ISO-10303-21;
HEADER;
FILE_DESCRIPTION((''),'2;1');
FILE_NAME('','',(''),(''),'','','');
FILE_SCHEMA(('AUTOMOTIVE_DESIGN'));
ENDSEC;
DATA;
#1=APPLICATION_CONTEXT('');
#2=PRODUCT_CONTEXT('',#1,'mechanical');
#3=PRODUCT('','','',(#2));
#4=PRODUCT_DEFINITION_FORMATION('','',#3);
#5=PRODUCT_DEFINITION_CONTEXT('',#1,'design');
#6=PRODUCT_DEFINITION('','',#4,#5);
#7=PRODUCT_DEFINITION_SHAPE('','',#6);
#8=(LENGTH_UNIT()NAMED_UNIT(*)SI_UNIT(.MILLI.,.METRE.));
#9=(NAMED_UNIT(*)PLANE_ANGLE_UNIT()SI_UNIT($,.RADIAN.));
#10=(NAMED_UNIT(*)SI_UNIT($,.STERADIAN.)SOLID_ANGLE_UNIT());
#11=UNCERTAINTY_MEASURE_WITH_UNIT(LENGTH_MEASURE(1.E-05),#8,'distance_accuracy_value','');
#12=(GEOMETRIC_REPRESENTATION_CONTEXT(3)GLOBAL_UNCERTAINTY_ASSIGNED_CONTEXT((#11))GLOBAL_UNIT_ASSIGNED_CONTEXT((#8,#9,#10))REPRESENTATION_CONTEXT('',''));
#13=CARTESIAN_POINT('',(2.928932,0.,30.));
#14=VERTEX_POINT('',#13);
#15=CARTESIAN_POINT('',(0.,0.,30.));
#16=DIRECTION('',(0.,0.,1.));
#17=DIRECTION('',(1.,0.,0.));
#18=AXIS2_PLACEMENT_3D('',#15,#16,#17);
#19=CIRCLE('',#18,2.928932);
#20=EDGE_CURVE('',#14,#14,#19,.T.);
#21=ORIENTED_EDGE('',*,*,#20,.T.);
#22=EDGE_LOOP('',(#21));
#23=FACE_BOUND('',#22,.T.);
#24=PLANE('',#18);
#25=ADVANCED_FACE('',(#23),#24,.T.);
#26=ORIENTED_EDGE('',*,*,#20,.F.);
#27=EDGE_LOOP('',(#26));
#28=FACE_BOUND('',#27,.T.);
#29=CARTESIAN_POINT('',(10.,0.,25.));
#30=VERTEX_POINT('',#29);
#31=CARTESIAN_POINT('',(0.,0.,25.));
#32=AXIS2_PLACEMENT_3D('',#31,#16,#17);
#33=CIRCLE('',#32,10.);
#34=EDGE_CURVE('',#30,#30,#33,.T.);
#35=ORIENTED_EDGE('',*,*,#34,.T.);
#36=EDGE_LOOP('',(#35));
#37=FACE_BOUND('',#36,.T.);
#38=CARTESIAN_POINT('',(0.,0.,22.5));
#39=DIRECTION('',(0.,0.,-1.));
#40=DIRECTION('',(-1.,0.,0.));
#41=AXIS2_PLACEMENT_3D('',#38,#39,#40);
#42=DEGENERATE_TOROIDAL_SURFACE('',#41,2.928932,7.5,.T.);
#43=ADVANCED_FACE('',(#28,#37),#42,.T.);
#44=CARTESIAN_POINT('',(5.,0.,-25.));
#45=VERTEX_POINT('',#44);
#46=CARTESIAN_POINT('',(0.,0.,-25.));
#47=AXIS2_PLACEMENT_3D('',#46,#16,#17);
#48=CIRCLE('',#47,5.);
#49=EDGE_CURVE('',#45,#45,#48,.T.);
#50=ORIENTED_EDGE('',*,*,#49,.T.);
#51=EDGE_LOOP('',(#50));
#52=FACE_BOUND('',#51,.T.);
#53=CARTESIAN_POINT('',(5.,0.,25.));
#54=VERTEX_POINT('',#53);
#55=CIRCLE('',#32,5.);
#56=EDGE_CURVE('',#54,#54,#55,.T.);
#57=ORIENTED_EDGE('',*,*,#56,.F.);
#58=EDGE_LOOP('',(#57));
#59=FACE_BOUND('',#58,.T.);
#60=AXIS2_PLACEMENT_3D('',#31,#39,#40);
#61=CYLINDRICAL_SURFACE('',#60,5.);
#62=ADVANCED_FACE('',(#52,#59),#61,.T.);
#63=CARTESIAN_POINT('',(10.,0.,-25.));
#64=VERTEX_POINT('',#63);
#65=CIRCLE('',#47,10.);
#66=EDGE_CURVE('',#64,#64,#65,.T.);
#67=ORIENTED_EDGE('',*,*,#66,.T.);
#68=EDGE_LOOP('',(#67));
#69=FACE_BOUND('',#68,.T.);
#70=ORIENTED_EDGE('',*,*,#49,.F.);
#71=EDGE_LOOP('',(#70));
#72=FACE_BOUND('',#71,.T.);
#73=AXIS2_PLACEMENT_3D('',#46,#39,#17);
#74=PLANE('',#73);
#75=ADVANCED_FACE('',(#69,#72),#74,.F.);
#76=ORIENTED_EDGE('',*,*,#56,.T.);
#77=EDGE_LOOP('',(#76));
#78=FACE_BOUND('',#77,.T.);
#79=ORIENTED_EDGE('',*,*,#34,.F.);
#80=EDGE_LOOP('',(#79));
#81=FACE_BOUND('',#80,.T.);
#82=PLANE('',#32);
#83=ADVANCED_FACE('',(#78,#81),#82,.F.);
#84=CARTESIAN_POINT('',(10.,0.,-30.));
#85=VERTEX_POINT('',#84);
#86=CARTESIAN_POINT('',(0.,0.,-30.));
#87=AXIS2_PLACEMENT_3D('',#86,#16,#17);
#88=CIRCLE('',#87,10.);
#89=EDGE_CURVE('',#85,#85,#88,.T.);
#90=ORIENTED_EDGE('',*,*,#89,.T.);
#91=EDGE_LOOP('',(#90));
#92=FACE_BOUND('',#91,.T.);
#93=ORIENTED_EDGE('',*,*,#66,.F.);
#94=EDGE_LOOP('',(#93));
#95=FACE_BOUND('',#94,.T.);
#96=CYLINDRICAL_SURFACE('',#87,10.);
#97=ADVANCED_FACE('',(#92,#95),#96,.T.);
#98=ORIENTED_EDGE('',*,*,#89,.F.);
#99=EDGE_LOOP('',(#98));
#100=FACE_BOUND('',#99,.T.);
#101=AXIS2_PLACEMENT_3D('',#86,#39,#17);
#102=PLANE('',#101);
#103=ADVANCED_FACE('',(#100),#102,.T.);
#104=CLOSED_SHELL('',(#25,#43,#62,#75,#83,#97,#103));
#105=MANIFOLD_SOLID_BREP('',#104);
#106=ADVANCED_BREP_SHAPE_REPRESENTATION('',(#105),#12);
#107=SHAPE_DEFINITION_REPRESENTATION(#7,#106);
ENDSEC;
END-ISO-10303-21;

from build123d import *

# Parameters (mm, degrees)
SKETCH1_R           = 5
BOSS_EXTRUDE1_DEPTH = 25
SKETCH2_R           = 10
BOSS_EXTRUDE2_DEPTH = 5
FILLET1_R           = 7.5


with BuildPart() as part:
    # Sketch1 → Boss-Extrude1 (new, symmetric)
    with BuildSketch(Plane.XY):
        Circle(SKETCH1_R)
    extrude(amount=BOSS_EXTRUDE1_DEPTH, both=True)

    # Sketch2 → Boss-Extrude2 (add)
    with BuildSketch(Plane.XY.offset(25)):
        Circle(SKETCH2_R)
    boss_extrude2 = extrude(amount=BOSS_EXTRUDE2_DEPTH)

    # Mirror1: Boss-Extrude2 across plane
    add(boss_extrude2.mirror(Plane.XY))

    # Fillet1
    # the kernel refuses this fillet: 7.5 mm, written as the material it takes off along each edge
    with BuildSketch(Plane(origin=(0, 0, 30), x_dir=(1, 0, 0), z_dir=(0, -1, 0))) as fillet1_piece_1:
        with BuildLine():
            CenterArc((2.928932188, -7.5), FILLET1_R, 19.471220634, 70.528779366)
            Line((2.928932188, 0), (2.928932188, 0.15))
            Line((2.928932188, 0.15), (10, 0.15))
            Line((10, 0.15), (10.15, 0))
            ThreePointArc((10.15, 0), (10.15, -2.5), (10.141421356, -4.95))
            Line((10.141421356, -4.95), (10, -5))
        make_face()
    revolve(axis=Axis((0, 0, 30), (0, 0, 1)), mode=Mode.SUBTRACT)


solid = part.part
